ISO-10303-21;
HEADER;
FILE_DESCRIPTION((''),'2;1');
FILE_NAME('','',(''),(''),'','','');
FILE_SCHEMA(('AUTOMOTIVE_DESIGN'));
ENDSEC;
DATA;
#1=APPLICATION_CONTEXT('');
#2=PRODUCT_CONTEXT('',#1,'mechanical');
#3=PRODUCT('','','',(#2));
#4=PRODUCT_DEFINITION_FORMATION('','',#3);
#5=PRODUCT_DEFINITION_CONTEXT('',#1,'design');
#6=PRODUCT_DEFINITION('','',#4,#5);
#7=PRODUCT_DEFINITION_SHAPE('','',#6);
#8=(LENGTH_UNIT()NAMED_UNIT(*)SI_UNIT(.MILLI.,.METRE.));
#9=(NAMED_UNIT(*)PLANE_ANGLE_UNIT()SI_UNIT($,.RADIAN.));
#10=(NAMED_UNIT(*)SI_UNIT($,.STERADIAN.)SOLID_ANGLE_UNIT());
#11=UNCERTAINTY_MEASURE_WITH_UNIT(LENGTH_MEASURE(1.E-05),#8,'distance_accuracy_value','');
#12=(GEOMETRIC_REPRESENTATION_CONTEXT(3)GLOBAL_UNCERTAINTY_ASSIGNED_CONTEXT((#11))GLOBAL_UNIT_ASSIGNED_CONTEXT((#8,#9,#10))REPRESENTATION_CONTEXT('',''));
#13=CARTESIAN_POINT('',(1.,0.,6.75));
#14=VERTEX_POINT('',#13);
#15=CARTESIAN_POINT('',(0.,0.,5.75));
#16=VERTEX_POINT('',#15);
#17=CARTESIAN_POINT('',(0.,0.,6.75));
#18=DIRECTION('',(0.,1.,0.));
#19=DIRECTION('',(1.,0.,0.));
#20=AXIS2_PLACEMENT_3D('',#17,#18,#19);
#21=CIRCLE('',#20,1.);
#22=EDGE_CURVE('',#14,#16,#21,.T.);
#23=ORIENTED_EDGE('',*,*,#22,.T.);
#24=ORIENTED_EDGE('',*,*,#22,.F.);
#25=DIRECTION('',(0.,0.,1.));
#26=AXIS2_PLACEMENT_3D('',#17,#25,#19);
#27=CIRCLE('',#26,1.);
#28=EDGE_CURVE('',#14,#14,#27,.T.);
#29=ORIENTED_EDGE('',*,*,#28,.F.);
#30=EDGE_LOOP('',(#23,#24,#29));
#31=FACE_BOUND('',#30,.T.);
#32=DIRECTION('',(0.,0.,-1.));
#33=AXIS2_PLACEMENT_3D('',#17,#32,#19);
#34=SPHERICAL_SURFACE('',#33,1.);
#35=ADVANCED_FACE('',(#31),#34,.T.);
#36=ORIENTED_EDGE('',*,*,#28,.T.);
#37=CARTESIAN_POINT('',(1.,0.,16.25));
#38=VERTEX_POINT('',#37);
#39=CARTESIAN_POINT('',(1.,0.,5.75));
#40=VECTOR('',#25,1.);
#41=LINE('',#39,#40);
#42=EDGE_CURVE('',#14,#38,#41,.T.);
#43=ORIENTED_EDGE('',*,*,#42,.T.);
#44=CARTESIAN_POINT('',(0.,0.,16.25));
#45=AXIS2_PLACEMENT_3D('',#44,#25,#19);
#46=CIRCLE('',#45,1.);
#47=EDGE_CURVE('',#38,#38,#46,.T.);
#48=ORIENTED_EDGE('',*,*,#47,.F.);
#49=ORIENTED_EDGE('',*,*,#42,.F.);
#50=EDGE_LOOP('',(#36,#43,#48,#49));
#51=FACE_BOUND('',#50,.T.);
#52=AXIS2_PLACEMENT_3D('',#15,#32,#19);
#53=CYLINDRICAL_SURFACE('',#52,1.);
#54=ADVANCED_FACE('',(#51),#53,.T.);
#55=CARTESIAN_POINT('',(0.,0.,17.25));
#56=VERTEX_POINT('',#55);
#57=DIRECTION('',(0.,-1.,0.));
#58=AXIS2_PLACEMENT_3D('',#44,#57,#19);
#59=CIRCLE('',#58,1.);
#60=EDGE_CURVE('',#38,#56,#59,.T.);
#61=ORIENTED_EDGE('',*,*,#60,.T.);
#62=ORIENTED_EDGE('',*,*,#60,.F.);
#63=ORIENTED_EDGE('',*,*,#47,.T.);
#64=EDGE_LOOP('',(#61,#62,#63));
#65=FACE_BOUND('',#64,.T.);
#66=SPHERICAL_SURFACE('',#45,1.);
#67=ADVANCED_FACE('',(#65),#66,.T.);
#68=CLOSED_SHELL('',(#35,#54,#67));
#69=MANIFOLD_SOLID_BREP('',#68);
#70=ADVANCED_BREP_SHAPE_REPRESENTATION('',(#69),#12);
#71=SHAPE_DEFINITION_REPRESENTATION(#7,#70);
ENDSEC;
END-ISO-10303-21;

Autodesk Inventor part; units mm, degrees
ref_plane "YZ Plane" through (0, 0, 0) normal (1, 0, 0) x (0, 1, 0)
ref_plane "XZ Plane" through (0, 0, 0) normal (0, 1, 0) x (-1, 0, 0)
ref_plane "XY Plane" through (0, 0, 0) normal (0, 0, 1) x (1, 0, 0)
sketch "Sketch1" plane through (0, 0, 0) normal (0, 0, 1) x (1, 0, 0)
  circle A0 centre (0, 0) radius 2
  dimension "d0" = 4
extrude "Extrusion1" add sketch "Sketch1" along normal blind 23
fillet "Fillet1" radius 2 2 edges at (-2, 0, 23) (-2, 0, 0)
scale "Scale1" factors (0.5, 0.5, 0.5) then translate (0, 0, 5.75) bodies 1
properties part number "Pasador 2"
